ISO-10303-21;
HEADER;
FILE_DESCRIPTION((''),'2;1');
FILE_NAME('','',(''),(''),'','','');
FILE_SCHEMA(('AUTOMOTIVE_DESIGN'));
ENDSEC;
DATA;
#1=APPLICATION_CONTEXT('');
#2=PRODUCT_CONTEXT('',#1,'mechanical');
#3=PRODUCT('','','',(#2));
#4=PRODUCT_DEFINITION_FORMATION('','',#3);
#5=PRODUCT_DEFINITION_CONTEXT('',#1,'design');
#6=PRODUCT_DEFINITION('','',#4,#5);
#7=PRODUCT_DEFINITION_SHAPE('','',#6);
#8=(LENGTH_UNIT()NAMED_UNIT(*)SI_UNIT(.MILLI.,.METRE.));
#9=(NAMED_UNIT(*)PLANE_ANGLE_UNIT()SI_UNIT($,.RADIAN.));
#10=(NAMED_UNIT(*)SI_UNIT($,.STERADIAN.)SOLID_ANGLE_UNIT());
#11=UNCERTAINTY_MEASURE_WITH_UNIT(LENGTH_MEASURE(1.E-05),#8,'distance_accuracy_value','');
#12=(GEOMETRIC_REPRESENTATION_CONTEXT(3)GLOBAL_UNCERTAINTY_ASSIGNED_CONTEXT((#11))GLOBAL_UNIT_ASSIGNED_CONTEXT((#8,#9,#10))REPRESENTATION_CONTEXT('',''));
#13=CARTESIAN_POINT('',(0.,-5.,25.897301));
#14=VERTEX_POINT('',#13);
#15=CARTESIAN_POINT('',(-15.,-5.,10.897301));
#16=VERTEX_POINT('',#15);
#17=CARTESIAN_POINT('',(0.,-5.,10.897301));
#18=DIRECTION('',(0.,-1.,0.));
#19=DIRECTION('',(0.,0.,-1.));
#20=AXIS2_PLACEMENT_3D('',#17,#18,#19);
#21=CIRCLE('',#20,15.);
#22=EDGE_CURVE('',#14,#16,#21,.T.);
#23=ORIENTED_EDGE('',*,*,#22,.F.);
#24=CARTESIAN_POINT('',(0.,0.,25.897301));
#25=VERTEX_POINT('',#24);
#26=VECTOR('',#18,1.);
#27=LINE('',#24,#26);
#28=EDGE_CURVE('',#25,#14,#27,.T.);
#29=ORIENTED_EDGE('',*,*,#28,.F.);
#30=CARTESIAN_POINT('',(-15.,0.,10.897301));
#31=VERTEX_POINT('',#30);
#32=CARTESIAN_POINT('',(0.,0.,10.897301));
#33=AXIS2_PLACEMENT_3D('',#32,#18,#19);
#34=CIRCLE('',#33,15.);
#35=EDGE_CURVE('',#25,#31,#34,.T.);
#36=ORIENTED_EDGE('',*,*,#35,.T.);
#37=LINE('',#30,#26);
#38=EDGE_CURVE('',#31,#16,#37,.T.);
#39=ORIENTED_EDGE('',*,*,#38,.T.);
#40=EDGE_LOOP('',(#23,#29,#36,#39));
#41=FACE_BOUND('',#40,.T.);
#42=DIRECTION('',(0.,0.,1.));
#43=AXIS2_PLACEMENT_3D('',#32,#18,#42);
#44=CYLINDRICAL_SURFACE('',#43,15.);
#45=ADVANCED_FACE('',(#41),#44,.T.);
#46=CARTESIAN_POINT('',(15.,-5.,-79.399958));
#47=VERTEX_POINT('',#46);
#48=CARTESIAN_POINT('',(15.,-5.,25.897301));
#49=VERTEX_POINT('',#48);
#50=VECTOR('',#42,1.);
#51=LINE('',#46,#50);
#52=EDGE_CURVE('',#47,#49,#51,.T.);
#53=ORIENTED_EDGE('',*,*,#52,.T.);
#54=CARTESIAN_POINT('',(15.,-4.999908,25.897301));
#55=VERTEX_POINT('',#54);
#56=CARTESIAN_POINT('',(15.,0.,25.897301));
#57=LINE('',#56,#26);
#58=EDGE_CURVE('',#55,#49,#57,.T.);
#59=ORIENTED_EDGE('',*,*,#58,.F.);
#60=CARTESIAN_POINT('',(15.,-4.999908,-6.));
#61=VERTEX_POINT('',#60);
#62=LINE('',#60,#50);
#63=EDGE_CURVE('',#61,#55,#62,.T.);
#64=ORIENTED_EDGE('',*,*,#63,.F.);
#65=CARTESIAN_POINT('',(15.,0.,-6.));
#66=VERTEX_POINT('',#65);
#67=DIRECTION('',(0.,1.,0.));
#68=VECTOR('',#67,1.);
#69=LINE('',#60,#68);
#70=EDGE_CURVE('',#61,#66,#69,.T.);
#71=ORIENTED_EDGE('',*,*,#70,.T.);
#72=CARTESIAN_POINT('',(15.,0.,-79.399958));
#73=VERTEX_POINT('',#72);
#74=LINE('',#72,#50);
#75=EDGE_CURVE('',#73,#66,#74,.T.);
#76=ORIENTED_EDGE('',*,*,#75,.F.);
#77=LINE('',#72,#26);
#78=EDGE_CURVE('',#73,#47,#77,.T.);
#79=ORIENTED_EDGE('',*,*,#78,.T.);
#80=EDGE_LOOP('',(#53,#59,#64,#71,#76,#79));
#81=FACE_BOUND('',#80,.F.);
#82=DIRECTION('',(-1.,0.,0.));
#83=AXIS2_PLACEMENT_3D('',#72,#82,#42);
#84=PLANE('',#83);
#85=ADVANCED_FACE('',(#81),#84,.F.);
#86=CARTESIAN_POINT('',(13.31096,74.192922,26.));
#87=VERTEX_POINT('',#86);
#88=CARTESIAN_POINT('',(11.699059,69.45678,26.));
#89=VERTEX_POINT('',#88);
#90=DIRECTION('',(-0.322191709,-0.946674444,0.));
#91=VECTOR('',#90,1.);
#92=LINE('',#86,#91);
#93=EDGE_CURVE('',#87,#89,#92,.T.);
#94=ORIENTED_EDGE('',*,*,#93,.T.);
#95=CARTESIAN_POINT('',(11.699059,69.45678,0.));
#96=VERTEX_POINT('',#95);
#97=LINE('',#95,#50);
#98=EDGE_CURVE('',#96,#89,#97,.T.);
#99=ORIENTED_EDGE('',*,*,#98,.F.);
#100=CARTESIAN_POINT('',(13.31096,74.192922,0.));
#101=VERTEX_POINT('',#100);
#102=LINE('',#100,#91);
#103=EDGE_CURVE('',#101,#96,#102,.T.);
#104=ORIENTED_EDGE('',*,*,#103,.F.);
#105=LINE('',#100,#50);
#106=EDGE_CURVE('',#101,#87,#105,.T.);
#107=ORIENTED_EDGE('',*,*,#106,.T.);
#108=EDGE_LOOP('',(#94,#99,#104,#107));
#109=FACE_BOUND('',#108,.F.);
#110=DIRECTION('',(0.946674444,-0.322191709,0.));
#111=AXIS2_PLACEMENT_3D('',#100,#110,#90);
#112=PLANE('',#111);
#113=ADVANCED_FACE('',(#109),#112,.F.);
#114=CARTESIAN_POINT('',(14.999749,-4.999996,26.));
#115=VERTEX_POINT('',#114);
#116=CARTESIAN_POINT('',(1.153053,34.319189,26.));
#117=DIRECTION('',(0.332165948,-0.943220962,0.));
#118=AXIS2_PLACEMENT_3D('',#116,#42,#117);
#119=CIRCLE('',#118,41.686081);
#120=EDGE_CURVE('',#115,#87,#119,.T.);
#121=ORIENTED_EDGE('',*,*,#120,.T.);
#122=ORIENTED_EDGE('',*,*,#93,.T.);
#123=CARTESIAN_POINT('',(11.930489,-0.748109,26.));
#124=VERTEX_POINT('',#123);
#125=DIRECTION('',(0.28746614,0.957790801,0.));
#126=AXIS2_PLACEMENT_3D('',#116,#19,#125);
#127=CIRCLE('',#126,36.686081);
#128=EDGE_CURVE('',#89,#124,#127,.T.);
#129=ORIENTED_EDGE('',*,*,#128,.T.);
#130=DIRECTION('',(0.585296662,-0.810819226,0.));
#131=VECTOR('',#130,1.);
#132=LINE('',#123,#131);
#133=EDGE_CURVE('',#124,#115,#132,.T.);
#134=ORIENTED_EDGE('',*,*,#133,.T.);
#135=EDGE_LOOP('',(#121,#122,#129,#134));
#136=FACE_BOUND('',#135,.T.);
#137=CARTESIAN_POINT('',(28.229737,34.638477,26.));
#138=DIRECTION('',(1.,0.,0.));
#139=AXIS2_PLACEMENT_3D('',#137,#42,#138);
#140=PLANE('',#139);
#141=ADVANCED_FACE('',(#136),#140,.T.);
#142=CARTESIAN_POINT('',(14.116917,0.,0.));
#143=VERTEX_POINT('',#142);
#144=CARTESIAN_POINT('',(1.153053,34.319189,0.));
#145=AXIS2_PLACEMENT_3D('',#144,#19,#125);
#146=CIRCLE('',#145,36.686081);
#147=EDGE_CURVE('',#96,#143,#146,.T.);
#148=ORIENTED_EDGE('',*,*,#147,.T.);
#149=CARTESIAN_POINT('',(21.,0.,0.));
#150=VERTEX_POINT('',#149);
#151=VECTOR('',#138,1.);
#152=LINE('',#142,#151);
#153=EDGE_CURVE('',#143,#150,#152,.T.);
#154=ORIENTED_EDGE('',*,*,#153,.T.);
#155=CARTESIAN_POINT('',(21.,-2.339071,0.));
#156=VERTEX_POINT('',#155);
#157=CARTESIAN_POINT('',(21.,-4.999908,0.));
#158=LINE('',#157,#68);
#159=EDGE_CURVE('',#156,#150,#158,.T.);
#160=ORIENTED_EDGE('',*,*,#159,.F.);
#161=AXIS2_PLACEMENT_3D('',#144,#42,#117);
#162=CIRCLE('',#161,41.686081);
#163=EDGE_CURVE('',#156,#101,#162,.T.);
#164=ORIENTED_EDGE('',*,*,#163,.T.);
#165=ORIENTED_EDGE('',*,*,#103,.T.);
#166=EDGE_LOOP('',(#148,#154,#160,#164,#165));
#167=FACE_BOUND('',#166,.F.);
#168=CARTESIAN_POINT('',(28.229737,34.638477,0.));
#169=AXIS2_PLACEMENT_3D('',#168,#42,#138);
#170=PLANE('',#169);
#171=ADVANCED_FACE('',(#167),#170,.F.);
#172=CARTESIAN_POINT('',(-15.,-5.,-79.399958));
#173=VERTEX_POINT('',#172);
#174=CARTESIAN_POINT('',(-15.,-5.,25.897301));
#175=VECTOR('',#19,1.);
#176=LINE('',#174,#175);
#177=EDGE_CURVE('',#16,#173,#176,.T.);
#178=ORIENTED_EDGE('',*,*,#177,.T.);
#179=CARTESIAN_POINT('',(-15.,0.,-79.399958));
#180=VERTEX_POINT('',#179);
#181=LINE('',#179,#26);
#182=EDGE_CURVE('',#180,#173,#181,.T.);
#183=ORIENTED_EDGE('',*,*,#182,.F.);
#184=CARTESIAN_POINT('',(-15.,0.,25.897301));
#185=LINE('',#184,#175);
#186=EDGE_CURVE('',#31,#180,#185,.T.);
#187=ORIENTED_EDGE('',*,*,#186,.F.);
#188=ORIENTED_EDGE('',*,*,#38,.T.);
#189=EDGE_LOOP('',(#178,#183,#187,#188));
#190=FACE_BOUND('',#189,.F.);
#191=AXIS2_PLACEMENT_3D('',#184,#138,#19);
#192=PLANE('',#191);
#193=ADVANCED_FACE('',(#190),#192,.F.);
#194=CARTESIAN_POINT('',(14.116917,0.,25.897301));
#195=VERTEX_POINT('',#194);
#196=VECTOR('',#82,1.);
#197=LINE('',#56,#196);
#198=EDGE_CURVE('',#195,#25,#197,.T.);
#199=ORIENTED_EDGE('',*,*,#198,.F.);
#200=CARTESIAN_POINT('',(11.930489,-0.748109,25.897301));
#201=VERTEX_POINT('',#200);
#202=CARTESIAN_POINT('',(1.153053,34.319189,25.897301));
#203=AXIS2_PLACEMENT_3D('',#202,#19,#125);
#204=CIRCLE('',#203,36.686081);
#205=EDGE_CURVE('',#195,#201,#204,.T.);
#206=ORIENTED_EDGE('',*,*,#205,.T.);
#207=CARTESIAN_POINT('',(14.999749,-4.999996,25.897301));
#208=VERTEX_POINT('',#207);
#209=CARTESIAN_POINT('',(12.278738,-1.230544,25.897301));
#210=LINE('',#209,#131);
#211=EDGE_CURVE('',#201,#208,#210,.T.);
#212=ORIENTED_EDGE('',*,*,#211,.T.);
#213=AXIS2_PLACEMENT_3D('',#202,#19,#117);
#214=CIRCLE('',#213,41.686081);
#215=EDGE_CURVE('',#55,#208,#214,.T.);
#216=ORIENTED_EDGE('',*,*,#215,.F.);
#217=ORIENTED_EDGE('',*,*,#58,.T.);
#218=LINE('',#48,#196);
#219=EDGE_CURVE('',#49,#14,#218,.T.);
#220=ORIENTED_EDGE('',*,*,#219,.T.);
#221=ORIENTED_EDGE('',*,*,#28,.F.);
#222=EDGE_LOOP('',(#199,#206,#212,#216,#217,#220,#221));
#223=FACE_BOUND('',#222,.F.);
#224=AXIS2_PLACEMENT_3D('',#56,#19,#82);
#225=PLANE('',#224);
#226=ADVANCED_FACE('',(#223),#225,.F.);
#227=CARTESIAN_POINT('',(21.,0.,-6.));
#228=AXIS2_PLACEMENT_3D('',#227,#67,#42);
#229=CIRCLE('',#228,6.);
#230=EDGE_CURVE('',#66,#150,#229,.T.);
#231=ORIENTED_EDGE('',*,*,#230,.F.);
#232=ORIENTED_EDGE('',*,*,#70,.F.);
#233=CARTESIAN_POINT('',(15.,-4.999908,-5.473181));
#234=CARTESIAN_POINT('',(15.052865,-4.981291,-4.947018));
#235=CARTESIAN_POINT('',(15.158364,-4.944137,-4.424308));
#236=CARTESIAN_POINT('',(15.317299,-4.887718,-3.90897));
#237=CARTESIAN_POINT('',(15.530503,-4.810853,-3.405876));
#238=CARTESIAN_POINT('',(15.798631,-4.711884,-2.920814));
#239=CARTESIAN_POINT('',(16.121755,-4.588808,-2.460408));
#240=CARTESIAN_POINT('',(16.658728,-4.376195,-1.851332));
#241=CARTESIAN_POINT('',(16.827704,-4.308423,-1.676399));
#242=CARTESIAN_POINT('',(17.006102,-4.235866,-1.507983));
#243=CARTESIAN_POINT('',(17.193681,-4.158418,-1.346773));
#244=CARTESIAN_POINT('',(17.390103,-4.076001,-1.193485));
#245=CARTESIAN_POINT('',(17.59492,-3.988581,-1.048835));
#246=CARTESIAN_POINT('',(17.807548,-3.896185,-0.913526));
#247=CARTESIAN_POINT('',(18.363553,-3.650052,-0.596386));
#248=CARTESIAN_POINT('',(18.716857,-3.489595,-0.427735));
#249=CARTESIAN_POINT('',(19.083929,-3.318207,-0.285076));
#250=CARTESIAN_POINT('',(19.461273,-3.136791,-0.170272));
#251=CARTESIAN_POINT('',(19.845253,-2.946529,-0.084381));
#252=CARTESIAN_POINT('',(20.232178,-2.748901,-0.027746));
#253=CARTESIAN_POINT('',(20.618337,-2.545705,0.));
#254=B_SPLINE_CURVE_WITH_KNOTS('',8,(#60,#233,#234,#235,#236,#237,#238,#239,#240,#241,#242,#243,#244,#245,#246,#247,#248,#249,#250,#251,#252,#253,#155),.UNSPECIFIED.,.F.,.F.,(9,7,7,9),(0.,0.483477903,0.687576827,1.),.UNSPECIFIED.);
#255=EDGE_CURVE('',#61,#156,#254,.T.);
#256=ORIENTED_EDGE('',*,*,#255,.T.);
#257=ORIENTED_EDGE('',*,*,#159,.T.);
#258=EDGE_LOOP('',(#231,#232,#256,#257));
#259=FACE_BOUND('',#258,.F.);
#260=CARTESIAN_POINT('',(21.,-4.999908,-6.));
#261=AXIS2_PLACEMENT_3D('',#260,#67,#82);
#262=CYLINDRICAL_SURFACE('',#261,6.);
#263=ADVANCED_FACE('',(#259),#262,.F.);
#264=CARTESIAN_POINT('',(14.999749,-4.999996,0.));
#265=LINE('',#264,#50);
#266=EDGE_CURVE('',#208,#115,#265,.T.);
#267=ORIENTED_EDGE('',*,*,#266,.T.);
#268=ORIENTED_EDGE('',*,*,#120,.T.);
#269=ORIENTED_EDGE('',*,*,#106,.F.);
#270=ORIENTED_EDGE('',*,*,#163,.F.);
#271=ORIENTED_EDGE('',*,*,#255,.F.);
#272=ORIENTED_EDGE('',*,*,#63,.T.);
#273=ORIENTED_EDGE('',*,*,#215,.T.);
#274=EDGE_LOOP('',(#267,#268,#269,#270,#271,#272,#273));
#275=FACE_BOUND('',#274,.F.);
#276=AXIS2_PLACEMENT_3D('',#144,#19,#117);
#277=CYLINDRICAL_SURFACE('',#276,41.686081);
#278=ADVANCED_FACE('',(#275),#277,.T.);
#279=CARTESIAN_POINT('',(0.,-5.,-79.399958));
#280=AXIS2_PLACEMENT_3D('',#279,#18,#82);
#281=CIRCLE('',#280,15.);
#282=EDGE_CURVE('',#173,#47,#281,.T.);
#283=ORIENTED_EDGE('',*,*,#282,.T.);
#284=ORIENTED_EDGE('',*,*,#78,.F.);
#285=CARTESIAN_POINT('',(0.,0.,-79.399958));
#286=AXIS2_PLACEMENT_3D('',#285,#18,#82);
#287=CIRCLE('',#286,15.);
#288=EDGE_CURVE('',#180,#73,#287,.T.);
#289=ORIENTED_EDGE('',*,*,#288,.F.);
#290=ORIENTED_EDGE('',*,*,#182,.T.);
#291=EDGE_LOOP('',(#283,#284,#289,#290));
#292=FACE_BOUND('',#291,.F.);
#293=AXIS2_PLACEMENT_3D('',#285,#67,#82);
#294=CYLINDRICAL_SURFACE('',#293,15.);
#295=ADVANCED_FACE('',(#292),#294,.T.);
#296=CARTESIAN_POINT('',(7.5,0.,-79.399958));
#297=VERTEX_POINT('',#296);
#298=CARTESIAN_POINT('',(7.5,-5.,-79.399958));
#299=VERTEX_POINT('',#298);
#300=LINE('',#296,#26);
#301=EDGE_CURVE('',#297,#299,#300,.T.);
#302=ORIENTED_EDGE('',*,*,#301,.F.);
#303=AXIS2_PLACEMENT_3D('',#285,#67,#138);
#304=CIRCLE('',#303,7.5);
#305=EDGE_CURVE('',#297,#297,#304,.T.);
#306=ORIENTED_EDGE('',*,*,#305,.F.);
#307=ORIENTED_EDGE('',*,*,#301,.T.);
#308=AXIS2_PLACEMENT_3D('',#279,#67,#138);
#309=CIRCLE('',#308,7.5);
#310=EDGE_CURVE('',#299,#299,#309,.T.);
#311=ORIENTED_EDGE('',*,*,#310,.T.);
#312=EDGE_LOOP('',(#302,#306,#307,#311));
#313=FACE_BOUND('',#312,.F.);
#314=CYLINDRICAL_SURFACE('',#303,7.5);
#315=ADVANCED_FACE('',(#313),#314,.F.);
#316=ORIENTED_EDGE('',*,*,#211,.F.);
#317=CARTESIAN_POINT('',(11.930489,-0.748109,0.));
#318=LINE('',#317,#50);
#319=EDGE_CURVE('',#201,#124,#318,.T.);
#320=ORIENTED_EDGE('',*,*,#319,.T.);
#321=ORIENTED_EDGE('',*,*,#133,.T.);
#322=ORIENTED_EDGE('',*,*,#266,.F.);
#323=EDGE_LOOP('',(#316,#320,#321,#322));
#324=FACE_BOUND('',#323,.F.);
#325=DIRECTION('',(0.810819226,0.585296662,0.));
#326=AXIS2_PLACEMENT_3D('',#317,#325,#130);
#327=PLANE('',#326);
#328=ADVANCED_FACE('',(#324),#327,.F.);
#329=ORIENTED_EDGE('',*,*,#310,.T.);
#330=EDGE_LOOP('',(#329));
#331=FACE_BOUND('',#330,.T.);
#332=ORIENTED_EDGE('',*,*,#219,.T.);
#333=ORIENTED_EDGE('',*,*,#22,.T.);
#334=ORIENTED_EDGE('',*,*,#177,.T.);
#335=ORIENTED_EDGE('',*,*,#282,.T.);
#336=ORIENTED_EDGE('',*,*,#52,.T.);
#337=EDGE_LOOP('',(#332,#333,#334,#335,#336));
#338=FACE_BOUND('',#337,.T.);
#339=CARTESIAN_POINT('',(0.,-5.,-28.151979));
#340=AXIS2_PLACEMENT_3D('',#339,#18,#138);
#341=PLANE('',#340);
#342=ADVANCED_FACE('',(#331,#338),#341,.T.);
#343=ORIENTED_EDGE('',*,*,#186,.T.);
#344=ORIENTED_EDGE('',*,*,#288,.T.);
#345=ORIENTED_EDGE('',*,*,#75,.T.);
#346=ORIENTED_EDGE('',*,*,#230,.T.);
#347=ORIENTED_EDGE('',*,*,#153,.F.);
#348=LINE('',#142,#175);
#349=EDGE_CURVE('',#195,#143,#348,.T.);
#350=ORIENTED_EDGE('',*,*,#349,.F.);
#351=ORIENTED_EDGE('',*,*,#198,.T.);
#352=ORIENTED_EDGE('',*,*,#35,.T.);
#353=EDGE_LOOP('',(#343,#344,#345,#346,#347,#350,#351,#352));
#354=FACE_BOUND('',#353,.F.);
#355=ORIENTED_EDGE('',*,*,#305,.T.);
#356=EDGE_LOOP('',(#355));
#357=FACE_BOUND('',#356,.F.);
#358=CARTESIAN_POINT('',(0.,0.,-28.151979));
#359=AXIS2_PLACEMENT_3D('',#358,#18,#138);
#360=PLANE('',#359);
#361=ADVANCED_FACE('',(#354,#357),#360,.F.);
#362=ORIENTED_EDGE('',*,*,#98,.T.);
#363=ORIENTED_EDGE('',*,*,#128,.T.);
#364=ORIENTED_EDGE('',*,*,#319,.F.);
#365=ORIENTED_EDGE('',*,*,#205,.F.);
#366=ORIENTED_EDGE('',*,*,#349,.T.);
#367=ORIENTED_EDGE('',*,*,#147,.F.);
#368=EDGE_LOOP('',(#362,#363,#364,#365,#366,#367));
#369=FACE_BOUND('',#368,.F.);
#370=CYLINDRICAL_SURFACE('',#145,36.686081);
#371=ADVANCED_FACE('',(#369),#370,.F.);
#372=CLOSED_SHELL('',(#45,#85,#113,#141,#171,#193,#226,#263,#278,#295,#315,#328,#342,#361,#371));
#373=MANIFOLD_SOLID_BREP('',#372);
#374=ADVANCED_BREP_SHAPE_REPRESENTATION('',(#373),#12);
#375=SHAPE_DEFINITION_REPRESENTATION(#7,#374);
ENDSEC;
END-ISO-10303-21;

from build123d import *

# Parameters (mm, degrees)
F1_DEPTH = 5
F3_DEPTH = 26
F4_R     = 15
F5_R     = 6


with BuildPart() as f1:
    # F0 (on Front) → F1 (new body)
    with BuildSketch(Plane.XZ):
        with BuildLine():
            Line((15.0000003353, -79.3999582529), (15.0000003353, 25.8973006904))
            Line((15.0000003353, 25.8973006904), (-14.9999996647, 25.8973006904))
            Line((-14.9999996647, 25.8973006904), (-14.9999996647, -79.3999582529))
            ThreePointArc((-14.9999996647, -79.3999582529), (3.353e-07, -64.3999582529), (15.0000003353, -79.3999582529))
        make_face()
        with BuildLine():
            ThreePointArc((-14.9999996647, -79.3999582529), (3.353e-07, -94.3999582529), (15.0000003353, -79.3999582529))
            Line((15.0000003353, -79.3999582529), (7.5000003353, -79.3999582529))
            ThreePointArc((7.5000003353, -79.3999582529), (3.353e-07, -86.8999582529), (-7.4999996647, -79.3999582529))
            Line((-7.4999996647, -79.3999582529), (-14.9999996647, -79.3999582529))
        make_face()
        with BuildLine():
            Line((7.5000003353, -79.3999582529), (15.0000003353, -79.3999582529))
            ThreePointArc((15.0000003353, -79.3999582529), (3.353e-07, -64.3999582529), (-14.9999996647, -79.3999582529))
            Line((-14.9999996647, -79.3999582529), (-7.4999996647, -79.3999582529))
            ThreePointArc((-7.4999996647, -79.3999582529), (3.353e-07, -71.8999582529), (7.5000003353, -79.3999582529))
        make_face()
    extrude(amount=F1_DEPTH)

    # F2 (on Top) → F3 (join)
    with BuildSketch(Plane.XY):
        with BuildLine():
            ThreePointArc((11.6990586319, 69.4567795833), (37.8389339862, 34.4401238089), (11.9304887253, -0.7481090158))
            Line((11.9304887253, -0.7481090158), (14.999749139, -4.999996163))
            ThreePointArc((14.999749139, -4.999996163), (42.8296580573, 35.2079426128), (13.3109600907, 74.1929223018))
            Line((13.3109600907, 74.1929223018), (11.6990586319, 69.4567795833))
        make_face()
    extrude(amount=F3_DEPTH)

    # F4
    f4_edges = [f1.edges().sort_by_distance(p)[0] for p in [
        (-15, -2.5, 25.897301),
    ]]
    fillet(f4_edges, radius=F4_R)

    # F5
    f5_edges = [f1.edges().sort_by_distance(p)[0] for p in [
        (15, -2.499954, 0),
    ]]
    fillet(f5_edges, radius=F5_R)


solid = f1.part
